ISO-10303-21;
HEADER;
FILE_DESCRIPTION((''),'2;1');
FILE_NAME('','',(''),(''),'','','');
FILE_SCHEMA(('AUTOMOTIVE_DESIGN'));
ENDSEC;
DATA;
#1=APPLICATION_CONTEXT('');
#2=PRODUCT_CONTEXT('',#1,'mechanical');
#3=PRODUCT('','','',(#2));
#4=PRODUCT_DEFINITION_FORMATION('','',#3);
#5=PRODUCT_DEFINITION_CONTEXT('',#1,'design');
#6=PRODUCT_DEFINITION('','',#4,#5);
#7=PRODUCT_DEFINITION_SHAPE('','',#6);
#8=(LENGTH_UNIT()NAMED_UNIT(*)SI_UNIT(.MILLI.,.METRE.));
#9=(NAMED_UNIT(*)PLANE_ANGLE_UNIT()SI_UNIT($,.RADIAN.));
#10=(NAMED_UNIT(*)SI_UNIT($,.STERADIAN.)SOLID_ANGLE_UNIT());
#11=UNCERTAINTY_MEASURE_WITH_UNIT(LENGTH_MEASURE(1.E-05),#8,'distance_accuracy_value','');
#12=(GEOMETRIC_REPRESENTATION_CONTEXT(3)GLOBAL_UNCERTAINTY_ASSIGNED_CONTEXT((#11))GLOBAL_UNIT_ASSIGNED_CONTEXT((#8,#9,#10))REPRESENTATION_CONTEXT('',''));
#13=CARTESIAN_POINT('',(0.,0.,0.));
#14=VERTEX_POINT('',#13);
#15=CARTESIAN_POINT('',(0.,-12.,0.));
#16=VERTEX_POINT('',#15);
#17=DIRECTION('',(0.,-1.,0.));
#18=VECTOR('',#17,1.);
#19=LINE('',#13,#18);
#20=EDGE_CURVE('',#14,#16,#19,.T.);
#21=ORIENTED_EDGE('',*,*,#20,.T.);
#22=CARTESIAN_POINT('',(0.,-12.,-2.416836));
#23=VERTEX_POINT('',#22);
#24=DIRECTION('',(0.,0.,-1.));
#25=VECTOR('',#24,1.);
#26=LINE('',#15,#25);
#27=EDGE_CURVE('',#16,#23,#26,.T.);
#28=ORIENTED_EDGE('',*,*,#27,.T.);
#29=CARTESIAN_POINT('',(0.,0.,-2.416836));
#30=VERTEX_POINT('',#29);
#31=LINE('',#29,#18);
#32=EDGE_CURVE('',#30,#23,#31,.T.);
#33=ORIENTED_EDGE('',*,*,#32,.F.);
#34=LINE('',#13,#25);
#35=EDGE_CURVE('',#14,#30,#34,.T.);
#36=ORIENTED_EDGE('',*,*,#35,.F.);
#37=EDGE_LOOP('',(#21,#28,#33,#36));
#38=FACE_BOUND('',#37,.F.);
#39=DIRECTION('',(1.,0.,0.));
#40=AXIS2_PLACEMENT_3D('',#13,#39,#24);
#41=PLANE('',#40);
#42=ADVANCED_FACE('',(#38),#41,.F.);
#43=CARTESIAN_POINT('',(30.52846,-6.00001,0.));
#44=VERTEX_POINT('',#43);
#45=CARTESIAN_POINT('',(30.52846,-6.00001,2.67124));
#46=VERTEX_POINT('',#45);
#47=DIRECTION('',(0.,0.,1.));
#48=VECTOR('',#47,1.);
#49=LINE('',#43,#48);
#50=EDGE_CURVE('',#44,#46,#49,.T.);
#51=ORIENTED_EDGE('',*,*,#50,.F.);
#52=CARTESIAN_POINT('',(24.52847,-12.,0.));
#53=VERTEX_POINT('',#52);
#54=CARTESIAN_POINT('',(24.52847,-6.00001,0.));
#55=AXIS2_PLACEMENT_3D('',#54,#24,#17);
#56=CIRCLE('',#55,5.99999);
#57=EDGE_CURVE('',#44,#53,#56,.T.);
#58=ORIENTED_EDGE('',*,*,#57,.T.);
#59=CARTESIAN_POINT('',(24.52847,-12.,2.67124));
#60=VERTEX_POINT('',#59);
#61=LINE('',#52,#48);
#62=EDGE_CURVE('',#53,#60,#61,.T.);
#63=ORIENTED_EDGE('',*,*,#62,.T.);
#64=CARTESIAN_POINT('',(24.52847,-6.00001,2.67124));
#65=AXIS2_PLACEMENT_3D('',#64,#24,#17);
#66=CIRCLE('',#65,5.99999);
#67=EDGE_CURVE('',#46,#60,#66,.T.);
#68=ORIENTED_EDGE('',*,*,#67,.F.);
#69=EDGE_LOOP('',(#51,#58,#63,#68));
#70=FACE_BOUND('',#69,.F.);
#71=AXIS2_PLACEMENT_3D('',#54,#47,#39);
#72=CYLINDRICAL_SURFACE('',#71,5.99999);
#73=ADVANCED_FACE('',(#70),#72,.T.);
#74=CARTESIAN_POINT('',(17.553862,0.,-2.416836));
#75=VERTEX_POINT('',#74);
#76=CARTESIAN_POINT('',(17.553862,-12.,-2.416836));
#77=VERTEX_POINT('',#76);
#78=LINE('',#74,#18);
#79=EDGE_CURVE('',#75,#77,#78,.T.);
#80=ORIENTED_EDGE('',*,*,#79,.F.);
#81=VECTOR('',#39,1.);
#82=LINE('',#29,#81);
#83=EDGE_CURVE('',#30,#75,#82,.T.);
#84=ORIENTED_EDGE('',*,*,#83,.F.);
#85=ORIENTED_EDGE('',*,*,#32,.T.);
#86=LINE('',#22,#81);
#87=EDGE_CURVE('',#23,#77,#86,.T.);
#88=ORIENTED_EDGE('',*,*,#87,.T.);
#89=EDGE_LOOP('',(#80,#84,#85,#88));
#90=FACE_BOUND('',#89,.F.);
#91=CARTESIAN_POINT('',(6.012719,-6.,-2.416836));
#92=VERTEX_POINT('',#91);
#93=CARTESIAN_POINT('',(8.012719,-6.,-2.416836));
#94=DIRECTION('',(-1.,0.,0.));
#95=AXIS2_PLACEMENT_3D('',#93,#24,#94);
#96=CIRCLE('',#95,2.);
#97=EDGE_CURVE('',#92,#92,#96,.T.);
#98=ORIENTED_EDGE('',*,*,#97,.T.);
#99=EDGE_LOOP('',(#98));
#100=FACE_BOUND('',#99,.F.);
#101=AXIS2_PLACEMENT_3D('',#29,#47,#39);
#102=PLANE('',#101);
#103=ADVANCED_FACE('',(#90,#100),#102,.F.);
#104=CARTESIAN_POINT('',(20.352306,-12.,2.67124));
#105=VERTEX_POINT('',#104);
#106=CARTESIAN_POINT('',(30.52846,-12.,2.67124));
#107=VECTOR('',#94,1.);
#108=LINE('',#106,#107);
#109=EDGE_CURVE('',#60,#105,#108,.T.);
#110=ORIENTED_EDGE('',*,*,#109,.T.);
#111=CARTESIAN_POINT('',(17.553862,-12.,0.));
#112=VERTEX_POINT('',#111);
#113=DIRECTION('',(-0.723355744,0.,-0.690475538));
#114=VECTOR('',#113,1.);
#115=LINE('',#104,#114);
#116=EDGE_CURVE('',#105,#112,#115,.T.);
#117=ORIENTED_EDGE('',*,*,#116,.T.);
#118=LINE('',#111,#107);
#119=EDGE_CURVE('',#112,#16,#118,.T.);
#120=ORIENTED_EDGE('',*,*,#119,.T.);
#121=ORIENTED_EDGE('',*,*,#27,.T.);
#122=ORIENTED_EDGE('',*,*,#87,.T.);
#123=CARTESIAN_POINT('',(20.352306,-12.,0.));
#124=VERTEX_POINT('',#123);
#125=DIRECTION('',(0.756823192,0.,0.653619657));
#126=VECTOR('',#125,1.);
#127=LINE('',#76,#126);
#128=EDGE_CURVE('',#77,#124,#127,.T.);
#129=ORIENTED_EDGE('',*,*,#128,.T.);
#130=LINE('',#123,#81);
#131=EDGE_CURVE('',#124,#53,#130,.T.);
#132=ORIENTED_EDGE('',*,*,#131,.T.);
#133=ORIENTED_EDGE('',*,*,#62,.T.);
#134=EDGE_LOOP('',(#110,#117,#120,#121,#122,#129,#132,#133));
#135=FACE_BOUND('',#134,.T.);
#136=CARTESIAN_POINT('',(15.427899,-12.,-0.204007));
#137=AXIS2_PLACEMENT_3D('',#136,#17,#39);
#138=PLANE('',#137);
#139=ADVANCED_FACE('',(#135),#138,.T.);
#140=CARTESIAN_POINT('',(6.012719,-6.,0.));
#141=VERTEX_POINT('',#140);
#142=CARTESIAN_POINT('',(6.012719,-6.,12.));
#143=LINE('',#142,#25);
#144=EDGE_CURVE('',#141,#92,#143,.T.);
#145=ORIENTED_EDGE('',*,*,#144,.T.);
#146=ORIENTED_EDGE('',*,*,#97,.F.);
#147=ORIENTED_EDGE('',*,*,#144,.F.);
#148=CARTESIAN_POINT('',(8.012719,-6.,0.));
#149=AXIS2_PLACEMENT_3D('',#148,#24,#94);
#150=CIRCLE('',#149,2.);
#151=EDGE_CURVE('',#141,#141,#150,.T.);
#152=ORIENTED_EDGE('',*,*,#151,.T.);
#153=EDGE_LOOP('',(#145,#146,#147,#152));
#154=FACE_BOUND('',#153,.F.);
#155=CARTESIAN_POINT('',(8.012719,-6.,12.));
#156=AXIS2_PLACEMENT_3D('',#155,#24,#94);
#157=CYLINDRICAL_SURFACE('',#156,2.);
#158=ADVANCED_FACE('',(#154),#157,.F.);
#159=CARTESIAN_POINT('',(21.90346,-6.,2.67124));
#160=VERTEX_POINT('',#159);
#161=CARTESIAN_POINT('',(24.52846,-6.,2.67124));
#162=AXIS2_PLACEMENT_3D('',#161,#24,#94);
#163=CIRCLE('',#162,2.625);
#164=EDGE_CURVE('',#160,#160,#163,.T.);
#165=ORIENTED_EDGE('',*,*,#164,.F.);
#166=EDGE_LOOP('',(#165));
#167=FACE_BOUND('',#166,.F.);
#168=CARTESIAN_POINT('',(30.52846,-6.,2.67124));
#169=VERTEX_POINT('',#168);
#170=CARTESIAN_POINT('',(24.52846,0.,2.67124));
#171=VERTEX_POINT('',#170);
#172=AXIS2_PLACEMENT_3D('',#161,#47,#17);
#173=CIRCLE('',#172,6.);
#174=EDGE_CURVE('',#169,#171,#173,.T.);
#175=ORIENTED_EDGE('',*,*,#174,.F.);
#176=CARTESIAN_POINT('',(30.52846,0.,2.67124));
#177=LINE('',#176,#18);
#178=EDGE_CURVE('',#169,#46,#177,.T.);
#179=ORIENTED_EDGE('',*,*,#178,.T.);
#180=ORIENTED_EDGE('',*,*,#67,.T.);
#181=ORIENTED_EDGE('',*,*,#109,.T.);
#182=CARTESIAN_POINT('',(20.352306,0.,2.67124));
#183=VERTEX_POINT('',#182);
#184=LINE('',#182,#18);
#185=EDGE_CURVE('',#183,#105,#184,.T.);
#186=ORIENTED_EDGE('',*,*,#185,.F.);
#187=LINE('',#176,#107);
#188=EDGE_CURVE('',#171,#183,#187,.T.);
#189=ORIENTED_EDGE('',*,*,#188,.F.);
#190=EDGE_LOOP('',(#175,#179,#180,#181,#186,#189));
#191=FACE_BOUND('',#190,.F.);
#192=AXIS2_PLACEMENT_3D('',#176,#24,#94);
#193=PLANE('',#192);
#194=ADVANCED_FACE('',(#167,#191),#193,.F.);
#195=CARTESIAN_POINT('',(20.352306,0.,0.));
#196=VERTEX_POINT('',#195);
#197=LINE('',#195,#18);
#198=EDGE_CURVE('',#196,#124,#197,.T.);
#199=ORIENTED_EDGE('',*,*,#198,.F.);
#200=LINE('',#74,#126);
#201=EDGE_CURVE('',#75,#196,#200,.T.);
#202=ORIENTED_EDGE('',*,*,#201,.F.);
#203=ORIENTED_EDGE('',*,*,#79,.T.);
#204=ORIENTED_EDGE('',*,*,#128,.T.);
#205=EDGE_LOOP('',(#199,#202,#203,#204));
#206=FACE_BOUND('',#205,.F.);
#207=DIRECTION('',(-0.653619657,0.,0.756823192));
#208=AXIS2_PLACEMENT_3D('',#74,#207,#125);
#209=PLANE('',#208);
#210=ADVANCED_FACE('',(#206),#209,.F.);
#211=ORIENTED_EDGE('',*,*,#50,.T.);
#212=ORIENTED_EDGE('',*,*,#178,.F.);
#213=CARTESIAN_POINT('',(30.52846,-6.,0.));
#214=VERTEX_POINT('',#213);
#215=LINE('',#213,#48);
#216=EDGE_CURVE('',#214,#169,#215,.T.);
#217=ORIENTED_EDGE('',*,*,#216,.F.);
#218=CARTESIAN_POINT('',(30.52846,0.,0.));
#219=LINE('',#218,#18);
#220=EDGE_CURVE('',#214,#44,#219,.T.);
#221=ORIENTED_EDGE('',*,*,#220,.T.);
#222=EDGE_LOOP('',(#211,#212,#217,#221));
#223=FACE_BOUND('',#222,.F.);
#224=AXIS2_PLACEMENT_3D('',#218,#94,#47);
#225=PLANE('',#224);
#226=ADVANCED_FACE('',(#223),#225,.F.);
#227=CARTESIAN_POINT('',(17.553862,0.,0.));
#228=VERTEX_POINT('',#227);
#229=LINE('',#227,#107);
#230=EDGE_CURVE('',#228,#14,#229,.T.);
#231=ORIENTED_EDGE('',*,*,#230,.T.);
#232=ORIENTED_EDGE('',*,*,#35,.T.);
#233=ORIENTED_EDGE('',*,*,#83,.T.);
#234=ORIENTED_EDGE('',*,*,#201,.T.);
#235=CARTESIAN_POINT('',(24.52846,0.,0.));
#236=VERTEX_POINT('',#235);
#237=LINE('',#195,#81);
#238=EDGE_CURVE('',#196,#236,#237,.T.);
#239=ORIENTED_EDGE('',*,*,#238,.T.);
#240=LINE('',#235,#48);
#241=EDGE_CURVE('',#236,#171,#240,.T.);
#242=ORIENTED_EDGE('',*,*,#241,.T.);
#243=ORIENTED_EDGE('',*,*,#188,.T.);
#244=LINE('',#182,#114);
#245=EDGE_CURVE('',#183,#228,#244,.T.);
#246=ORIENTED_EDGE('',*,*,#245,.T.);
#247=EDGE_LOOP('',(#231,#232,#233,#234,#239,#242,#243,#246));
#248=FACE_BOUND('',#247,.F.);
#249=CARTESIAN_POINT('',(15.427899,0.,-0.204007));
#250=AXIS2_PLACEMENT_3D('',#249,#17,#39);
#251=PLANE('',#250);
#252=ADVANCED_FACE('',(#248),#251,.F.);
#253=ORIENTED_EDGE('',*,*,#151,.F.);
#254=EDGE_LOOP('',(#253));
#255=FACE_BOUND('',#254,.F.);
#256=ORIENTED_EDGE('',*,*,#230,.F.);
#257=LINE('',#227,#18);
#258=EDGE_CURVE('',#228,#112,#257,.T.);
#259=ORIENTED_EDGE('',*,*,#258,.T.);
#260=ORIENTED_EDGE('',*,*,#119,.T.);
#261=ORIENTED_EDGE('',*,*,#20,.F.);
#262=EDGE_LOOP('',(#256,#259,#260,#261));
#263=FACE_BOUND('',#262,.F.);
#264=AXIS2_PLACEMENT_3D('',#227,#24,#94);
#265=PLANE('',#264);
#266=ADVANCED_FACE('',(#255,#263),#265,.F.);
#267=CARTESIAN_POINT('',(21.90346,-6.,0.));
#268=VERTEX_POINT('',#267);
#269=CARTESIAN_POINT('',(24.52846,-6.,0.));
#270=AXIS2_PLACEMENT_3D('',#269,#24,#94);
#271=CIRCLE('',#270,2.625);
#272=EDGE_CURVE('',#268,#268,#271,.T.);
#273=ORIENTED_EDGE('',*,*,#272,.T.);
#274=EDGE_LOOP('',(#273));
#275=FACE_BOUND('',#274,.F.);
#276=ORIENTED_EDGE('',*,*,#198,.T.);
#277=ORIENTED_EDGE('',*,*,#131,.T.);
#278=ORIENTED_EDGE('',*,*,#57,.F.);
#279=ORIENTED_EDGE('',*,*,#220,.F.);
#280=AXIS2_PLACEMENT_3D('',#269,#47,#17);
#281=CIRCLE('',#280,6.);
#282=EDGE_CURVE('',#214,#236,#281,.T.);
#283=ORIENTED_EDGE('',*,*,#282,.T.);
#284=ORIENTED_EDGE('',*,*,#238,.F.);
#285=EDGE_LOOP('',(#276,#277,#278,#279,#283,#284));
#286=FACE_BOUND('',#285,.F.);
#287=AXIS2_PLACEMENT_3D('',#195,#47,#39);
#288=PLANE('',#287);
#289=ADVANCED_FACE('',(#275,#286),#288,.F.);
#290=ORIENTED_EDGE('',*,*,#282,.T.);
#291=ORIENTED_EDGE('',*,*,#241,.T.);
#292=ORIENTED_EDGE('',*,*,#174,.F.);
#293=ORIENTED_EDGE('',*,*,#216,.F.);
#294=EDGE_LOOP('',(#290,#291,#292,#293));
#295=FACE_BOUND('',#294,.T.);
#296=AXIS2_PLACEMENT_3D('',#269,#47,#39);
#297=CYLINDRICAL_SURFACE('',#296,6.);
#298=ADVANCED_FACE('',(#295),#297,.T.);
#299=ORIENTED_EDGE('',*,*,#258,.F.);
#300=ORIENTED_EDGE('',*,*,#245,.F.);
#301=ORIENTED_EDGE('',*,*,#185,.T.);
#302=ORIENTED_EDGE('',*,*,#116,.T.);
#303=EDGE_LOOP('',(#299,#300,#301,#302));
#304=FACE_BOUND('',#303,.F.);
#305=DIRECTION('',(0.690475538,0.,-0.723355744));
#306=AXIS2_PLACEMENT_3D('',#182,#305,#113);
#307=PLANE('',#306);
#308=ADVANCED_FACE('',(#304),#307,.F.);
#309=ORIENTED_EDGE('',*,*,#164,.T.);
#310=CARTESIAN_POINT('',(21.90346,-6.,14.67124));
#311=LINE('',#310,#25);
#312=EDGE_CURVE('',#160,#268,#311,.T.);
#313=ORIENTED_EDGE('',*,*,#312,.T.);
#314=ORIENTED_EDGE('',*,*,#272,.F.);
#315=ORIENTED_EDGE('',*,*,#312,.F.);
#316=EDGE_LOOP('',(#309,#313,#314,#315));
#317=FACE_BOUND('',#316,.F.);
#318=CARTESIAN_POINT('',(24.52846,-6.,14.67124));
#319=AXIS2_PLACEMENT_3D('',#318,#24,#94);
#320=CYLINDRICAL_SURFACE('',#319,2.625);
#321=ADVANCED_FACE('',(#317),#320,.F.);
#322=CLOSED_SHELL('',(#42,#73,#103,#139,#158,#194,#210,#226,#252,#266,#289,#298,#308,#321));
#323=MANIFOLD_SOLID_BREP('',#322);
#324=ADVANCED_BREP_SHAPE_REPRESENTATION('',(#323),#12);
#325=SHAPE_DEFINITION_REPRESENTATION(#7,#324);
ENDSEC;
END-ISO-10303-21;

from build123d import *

# Parameters (mm, degrees)
F1_DEPTH = 12
F2_R     = 6
F3_R     = 5.99999
F5_D     = 5.25
F5_DEPTH = 12
F5_TIP   = 1.5772591249
F7_D     = 4
F7_DEPTH = 12
F7_TIP   = 1.2017212381


# Not quite as in the source:
# - a fillet or chamfer is up to 0.001 mm smaller than in the source, because OpenCascade refuses the exact size


with BuildPart() as f1:
    # F0 (on Front) → F1 (new body)
    with BuildSketch(Plane.XZ):
        Polygon((17.5538621843, 0), (0, 0), (0, -2.4168363307), (17.5538621843, -2.4168363307), (20.3523058444, 0), (30.528459698, 0), (30.528459698, 2.6712401304), (20.3523058444, 2.6712401304), align=None)
    extrude(amount=F1_DEPTH)

    # F2
    f2_edges = [f1.edges().sort_by_distance(p)[0] for p in [
        (30.52846, 0, 1.33562),
    ]]
    fillet(f2_edges, radius=F2_R)

    # F3 (radius 6 in the source; OpenCascade refuses exactly that, so slightly less here)
    f3_edges = [f1.edges().sort_by_distance(p)[0] for p in [
        (30.52846, -12, 1.33562),
    ]]
    fillet(f3_edges, radius=F3_R)

    # F5
    with Locations(Plane.XY.offset(2.6712401304)):
        with Locations((24.528459698, -6)):
            Hole(F5_D / 2, depth=F5_DEPTH)
            with Locations((0, 0, -(F5_DEPTH + F5_TIP / 2))):  # 118° drill point
                Cone(0, F5_D / 2, F5_TIP, mode=Mode.SUBTRACT)

    # F7
    with Locations(Plane.XY):
        with Locations((8.0127185211, -6)):
            Hole(F7_D / 2, depth=F7_DEPTH)
            with Locations((0, 0, -(F7_DEPTH + F7_TIP / 2))):  # 118° drill point
                Cone(0, F7_D / 2, F7_TIP, mode=Mode.SUBTRACT)


solid = f1.part
